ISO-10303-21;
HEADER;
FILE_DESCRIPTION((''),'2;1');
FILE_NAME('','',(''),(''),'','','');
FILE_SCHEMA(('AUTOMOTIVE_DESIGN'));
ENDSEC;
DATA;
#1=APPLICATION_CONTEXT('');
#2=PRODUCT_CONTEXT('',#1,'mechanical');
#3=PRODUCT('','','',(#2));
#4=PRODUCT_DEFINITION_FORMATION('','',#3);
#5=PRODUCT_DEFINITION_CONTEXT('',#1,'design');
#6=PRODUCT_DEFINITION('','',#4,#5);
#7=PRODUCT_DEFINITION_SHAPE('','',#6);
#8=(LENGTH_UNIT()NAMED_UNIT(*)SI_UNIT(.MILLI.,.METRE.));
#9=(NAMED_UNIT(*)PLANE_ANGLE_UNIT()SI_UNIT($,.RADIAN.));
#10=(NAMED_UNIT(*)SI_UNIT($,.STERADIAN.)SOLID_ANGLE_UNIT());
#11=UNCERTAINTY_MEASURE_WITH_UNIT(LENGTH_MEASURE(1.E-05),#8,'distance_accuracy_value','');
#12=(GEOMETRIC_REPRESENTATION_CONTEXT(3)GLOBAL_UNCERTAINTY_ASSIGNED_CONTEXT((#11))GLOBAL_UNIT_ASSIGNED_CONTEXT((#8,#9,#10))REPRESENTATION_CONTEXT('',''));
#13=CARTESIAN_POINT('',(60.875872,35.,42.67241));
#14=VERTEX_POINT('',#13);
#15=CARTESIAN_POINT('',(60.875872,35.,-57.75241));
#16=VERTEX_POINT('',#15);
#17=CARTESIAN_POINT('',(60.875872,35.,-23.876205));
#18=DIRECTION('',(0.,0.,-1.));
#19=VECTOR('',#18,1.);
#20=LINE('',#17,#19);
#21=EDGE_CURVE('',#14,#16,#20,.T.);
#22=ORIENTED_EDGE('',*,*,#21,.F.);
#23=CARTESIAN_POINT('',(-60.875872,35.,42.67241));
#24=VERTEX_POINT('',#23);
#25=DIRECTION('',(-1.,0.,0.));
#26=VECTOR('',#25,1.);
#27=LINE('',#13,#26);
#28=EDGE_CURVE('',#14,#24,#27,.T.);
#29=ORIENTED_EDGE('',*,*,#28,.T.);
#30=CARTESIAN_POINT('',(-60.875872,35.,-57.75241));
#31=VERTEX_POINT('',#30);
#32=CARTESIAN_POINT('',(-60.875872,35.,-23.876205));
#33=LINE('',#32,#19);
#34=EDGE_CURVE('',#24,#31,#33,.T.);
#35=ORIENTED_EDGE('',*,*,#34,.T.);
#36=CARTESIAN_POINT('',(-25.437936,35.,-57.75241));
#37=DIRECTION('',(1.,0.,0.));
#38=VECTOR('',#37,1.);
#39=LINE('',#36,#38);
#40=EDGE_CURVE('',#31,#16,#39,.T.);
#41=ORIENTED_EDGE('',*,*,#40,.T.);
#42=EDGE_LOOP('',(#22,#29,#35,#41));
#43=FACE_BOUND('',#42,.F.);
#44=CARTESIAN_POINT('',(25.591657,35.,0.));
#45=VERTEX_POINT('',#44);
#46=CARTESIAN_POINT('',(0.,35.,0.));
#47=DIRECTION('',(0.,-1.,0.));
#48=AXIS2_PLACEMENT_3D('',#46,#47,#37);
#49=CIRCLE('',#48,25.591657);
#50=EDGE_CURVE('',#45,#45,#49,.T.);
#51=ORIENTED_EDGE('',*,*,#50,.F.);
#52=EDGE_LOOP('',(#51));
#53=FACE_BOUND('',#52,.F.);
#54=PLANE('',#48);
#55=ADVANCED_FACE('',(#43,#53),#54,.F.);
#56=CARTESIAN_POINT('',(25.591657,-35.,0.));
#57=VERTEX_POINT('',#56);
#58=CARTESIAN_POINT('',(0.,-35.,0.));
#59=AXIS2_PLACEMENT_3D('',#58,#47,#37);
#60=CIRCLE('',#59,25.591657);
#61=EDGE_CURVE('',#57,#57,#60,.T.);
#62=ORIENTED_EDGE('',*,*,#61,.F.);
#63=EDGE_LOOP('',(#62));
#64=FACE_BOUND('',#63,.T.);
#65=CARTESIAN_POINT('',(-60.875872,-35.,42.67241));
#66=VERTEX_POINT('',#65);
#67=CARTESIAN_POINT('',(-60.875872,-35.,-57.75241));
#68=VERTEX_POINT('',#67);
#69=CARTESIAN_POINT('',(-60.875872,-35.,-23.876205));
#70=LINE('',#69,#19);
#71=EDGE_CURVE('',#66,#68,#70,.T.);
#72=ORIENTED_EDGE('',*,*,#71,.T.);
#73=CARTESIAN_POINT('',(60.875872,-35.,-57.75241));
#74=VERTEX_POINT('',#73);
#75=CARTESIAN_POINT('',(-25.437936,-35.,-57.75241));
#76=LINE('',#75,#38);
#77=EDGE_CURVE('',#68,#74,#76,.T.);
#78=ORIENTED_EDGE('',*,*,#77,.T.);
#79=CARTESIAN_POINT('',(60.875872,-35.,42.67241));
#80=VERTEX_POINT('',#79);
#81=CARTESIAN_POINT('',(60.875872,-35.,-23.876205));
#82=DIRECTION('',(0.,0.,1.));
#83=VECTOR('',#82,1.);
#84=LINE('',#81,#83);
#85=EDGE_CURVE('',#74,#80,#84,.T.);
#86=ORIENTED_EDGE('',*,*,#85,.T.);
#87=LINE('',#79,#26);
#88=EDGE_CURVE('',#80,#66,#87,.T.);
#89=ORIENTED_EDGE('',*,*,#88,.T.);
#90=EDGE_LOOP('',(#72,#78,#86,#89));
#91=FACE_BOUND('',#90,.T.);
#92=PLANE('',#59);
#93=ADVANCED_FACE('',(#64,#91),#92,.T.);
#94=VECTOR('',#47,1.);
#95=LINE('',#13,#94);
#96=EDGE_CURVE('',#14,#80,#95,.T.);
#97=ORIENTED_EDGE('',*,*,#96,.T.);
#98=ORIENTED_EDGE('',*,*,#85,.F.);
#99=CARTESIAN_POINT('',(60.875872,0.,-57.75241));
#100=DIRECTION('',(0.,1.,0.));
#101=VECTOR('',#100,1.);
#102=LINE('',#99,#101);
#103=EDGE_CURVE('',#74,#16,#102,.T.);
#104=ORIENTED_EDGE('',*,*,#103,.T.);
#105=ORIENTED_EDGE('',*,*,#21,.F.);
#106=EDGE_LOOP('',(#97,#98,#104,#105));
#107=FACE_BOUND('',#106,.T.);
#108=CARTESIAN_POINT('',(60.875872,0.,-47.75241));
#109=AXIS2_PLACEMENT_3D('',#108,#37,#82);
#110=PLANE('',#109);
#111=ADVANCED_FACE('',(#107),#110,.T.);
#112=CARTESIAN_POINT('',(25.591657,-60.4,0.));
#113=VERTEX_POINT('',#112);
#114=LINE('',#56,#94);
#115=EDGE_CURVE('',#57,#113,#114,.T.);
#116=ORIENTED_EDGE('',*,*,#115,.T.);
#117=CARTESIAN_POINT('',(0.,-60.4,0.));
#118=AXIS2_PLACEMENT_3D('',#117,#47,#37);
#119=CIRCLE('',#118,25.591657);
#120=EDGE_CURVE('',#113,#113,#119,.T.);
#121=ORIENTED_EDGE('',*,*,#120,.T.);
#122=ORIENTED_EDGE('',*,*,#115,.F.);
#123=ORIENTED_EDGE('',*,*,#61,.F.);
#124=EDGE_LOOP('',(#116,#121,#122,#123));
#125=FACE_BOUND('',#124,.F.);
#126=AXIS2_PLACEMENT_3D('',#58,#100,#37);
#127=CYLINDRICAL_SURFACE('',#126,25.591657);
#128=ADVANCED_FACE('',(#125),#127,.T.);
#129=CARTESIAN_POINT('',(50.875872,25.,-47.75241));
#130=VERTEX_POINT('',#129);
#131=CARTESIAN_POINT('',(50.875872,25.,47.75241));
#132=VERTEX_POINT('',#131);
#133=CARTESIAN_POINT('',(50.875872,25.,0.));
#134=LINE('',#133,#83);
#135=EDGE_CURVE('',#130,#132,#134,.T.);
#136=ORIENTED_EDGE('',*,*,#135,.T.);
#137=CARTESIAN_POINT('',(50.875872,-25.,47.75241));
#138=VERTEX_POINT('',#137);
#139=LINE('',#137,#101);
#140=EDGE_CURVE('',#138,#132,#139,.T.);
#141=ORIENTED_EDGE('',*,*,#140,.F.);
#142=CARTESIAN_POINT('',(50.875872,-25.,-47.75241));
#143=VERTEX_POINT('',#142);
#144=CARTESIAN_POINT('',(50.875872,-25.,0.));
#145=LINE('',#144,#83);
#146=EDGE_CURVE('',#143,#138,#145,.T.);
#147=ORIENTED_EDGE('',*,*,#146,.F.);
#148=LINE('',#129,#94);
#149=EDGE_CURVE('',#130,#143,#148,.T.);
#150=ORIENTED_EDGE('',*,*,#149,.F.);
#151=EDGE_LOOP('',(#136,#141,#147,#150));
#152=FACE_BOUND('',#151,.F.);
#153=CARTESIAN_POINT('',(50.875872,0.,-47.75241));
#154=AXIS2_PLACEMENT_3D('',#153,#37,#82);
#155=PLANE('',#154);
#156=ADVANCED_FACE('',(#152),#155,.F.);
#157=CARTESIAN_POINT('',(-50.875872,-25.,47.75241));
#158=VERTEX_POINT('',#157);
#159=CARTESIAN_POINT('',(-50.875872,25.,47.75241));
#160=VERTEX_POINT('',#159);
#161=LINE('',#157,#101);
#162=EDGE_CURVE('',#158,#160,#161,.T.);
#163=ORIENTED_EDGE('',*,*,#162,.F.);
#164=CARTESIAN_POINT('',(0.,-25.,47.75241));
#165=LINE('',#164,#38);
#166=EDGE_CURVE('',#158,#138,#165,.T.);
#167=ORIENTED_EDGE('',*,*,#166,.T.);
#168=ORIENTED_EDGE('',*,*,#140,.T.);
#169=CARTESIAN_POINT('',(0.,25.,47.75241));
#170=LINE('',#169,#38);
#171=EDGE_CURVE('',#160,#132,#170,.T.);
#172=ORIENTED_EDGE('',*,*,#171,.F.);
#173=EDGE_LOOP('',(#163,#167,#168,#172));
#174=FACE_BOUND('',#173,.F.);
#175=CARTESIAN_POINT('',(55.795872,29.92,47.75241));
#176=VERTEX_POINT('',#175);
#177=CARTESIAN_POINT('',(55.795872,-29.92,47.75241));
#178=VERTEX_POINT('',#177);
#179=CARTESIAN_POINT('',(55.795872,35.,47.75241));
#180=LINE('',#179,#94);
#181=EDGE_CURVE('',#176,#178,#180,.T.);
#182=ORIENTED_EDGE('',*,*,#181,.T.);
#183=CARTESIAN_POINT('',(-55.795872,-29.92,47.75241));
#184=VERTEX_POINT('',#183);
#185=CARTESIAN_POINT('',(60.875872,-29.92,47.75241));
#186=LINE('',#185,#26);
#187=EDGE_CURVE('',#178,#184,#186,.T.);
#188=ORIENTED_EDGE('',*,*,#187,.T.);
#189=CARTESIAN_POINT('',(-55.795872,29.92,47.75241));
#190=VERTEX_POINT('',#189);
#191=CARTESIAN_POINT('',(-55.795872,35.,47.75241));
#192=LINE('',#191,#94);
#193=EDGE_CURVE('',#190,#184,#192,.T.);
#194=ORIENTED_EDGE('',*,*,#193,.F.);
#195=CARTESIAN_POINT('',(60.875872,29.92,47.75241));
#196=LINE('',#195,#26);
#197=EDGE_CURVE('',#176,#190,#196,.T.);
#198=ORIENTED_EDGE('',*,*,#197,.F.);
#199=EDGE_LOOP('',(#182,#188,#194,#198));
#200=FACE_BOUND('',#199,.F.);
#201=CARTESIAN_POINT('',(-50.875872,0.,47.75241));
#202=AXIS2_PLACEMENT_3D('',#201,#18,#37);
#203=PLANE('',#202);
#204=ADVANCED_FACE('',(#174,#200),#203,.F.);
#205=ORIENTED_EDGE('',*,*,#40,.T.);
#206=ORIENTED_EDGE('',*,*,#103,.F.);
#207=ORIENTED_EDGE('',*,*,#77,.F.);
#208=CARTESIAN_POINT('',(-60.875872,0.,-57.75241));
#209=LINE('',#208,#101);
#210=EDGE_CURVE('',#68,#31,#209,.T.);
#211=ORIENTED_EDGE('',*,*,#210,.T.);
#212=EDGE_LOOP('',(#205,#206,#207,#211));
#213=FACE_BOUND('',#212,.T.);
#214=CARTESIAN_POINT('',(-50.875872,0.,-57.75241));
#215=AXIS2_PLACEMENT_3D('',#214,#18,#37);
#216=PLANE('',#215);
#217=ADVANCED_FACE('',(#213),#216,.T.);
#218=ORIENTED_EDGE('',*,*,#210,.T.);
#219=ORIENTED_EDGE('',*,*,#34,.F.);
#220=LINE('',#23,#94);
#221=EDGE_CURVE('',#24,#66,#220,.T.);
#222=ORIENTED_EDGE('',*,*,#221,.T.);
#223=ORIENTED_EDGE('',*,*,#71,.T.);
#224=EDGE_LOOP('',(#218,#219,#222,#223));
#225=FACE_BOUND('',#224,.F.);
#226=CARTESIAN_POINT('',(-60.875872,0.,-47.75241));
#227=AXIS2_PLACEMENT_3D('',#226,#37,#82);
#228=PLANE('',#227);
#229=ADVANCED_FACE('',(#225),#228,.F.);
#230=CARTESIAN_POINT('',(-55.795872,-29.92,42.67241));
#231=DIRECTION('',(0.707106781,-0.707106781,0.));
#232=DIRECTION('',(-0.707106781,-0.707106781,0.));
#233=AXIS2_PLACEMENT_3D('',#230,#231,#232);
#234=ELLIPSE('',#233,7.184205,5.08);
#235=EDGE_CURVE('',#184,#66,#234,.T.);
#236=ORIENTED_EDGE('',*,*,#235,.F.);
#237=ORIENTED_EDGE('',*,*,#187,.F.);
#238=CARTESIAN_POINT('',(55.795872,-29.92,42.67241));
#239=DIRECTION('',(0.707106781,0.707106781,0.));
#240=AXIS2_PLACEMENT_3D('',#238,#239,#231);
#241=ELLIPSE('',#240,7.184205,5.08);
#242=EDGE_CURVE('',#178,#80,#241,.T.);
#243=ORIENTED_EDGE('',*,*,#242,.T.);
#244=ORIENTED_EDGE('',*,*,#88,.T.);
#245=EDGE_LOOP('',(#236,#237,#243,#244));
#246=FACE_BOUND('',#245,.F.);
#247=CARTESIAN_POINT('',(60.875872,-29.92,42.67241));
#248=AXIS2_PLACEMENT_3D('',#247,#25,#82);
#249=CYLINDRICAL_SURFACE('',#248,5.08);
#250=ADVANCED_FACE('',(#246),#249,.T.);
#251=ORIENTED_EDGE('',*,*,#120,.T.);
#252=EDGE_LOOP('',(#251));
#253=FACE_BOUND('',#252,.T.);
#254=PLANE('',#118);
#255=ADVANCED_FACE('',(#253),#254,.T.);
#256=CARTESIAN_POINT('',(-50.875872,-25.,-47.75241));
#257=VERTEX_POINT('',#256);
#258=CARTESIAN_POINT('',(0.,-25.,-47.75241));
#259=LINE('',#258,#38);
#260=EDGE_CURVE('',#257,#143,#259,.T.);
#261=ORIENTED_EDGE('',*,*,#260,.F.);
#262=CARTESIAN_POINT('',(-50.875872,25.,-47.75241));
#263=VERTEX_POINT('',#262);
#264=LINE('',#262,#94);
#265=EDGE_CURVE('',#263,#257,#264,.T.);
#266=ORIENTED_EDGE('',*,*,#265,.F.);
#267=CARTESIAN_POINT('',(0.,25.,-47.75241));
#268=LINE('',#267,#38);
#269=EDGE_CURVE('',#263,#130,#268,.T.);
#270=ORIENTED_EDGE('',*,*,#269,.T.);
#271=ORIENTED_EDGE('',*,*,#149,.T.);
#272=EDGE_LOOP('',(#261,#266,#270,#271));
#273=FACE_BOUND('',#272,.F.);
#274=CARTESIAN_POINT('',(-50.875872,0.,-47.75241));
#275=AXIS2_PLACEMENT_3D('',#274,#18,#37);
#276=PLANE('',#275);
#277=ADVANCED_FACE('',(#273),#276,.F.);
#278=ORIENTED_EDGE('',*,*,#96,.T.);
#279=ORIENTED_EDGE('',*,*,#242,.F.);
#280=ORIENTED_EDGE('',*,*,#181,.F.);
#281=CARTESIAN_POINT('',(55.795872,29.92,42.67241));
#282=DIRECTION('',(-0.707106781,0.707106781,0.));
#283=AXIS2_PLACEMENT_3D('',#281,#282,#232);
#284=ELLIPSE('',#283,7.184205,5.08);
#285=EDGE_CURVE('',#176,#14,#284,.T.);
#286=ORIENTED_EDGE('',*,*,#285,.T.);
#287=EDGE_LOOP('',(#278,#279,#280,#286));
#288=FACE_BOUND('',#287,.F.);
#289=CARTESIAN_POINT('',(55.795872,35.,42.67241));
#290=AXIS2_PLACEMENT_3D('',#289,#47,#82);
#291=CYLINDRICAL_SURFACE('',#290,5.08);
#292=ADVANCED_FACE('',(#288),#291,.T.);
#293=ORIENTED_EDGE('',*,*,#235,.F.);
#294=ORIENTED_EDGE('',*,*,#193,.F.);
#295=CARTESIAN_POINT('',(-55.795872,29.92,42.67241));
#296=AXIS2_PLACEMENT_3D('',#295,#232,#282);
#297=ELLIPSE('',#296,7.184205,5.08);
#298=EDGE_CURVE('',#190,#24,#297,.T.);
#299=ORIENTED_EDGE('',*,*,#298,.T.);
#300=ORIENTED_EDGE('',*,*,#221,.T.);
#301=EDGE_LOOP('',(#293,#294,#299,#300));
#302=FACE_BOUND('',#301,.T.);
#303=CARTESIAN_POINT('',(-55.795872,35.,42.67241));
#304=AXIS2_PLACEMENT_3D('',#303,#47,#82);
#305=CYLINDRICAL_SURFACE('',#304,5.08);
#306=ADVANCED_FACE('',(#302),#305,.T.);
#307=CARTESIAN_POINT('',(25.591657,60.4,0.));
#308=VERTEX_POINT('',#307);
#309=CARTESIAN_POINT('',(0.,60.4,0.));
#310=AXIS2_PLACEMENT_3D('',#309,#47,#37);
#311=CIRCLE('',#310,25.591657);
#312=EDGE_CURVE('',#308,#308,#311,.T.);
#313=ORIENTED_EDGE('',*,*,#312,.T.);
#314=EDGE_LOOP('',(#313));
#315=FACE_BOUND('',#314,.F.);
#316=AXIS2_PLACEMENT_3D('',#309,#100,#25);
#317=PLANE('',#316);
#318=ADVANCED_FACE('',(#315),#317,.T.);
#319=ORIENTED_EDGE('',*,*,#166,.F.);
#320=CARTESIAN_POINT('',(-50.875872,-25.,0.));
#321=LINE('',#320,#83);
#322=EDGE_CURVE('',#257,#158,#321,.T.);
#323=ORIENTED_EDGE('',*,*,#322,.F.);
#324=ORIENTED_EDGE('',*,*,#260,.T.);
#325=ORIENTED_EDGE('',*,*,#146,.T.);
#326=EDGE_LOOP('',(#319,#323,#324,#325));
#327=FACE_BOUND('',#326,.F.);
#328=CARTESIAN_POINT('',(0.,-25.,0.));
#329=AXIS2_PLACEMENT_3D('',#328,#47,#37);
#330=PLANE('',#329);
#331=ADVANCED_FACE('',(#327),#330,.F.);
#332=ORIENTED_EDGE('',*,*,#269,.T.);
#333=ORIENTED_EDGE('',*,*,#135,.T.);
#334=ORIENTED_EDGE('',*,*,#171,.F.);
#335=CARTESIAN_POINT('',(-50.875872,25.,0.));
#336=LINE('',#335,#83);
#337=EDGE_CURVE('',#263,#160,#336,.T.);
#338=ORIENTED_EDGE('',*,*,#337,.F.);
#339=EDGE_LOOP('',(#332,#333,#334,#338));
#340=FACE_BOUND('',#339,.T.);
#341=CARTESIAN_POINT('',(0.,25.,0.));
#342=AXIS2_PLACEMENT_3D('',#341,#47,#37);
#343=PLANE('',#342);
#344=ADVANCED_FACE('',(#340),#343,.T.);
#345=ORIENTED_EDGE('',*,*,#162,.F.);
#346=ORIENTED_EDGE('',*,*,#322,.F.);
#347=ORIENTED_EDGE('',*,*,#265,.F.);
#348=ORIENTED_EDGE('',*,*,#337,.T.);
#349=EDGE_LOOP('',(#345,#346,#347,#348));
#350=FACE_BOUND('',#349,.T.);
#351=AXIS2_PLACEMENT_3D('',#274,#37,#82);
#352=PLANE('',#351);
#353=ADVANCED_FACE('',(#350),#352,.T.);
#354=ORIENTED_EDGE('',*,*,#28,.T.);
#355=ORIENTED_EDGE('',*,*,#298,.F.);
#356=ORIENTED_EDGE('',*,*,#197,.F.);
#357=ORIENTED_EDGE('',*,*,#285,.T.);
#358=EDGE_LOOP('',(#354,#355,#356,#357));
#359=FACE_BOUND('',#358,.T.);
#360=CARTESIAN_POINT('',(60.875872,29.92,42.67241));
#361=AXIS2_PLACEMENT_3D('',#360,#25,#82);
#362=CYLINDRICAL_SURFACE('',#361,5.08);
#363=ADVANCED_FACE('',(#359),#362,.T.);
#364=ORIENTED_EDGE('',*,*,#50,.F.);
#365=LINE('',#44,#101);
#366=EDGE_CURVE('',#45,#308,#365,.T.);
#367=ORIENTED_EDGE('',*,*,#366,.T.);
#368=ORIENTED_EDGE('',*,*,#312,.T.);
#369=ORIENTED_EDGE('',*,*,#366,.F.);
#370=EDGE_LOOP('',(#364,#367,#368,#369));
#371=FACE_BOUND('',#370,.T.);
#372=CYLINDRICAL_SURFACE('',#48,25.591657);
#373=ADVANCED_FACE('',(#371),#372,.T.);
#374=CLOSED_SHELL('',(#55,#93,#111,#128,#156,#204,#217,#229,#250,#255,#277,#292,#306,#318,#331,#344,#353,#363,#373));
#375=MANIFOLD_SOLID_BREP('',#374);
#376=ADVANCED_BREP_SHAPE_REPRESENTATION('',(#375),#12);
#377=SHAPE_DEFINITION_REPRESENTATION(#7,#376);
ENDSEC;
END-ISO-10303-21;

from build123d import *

# Parameters (mm, degrees)
F0_W     = 101.7517447472
F0_H     = 95.5048203468
F1_DEPTH = 25
F2_T     = 10
F3_R     = 25.591656965
F4_DEPTH = 25.4
F5_R     = 5.08


# Not quite as in the source:
# - a pattern or mirror of a feature is missing from the dataset's text; its kind, count and spacing are read off the source's solid


with BuildPart() as f1:
    # F0 (on Front) → F1 (new body, symmetric)
    with BuildSketch(Plane.XZ):
        Rectangle(F0_W, F0_H)
    extrude(amount=F1_DEPTH, both=True)

    # F2
    f2_openings = [f1.faces().sort_by_distance(p)[0] for p in [
        (0, 0, 47.75241),
    ]]
    offset(amount=F2_T, openings=f2_openings, kind=Kind.INTERSECTION)

    # F3 (on face) → F4 (join)
    with BuildSketch(Plane.XZ.offset(35)):
        Circle(F3_R)
    f4 = extrude(amount=F4_DEPTH)

    # F4_copies: F4 across plane
    add(f4.mirror(Plane.ZX))

    # F5
    f5_edges = [f1.edges().sort_by_distance(p)[0] for p in [
        (60.875872, 0, 47.75241),
        (0, 35, 47.75241),
        (-60.875872, 0, 47.75241),
        (0, -35, 47.75241),
    ]]
    fillet(f5_edges, radius=F5_R)


solid = f1.part
